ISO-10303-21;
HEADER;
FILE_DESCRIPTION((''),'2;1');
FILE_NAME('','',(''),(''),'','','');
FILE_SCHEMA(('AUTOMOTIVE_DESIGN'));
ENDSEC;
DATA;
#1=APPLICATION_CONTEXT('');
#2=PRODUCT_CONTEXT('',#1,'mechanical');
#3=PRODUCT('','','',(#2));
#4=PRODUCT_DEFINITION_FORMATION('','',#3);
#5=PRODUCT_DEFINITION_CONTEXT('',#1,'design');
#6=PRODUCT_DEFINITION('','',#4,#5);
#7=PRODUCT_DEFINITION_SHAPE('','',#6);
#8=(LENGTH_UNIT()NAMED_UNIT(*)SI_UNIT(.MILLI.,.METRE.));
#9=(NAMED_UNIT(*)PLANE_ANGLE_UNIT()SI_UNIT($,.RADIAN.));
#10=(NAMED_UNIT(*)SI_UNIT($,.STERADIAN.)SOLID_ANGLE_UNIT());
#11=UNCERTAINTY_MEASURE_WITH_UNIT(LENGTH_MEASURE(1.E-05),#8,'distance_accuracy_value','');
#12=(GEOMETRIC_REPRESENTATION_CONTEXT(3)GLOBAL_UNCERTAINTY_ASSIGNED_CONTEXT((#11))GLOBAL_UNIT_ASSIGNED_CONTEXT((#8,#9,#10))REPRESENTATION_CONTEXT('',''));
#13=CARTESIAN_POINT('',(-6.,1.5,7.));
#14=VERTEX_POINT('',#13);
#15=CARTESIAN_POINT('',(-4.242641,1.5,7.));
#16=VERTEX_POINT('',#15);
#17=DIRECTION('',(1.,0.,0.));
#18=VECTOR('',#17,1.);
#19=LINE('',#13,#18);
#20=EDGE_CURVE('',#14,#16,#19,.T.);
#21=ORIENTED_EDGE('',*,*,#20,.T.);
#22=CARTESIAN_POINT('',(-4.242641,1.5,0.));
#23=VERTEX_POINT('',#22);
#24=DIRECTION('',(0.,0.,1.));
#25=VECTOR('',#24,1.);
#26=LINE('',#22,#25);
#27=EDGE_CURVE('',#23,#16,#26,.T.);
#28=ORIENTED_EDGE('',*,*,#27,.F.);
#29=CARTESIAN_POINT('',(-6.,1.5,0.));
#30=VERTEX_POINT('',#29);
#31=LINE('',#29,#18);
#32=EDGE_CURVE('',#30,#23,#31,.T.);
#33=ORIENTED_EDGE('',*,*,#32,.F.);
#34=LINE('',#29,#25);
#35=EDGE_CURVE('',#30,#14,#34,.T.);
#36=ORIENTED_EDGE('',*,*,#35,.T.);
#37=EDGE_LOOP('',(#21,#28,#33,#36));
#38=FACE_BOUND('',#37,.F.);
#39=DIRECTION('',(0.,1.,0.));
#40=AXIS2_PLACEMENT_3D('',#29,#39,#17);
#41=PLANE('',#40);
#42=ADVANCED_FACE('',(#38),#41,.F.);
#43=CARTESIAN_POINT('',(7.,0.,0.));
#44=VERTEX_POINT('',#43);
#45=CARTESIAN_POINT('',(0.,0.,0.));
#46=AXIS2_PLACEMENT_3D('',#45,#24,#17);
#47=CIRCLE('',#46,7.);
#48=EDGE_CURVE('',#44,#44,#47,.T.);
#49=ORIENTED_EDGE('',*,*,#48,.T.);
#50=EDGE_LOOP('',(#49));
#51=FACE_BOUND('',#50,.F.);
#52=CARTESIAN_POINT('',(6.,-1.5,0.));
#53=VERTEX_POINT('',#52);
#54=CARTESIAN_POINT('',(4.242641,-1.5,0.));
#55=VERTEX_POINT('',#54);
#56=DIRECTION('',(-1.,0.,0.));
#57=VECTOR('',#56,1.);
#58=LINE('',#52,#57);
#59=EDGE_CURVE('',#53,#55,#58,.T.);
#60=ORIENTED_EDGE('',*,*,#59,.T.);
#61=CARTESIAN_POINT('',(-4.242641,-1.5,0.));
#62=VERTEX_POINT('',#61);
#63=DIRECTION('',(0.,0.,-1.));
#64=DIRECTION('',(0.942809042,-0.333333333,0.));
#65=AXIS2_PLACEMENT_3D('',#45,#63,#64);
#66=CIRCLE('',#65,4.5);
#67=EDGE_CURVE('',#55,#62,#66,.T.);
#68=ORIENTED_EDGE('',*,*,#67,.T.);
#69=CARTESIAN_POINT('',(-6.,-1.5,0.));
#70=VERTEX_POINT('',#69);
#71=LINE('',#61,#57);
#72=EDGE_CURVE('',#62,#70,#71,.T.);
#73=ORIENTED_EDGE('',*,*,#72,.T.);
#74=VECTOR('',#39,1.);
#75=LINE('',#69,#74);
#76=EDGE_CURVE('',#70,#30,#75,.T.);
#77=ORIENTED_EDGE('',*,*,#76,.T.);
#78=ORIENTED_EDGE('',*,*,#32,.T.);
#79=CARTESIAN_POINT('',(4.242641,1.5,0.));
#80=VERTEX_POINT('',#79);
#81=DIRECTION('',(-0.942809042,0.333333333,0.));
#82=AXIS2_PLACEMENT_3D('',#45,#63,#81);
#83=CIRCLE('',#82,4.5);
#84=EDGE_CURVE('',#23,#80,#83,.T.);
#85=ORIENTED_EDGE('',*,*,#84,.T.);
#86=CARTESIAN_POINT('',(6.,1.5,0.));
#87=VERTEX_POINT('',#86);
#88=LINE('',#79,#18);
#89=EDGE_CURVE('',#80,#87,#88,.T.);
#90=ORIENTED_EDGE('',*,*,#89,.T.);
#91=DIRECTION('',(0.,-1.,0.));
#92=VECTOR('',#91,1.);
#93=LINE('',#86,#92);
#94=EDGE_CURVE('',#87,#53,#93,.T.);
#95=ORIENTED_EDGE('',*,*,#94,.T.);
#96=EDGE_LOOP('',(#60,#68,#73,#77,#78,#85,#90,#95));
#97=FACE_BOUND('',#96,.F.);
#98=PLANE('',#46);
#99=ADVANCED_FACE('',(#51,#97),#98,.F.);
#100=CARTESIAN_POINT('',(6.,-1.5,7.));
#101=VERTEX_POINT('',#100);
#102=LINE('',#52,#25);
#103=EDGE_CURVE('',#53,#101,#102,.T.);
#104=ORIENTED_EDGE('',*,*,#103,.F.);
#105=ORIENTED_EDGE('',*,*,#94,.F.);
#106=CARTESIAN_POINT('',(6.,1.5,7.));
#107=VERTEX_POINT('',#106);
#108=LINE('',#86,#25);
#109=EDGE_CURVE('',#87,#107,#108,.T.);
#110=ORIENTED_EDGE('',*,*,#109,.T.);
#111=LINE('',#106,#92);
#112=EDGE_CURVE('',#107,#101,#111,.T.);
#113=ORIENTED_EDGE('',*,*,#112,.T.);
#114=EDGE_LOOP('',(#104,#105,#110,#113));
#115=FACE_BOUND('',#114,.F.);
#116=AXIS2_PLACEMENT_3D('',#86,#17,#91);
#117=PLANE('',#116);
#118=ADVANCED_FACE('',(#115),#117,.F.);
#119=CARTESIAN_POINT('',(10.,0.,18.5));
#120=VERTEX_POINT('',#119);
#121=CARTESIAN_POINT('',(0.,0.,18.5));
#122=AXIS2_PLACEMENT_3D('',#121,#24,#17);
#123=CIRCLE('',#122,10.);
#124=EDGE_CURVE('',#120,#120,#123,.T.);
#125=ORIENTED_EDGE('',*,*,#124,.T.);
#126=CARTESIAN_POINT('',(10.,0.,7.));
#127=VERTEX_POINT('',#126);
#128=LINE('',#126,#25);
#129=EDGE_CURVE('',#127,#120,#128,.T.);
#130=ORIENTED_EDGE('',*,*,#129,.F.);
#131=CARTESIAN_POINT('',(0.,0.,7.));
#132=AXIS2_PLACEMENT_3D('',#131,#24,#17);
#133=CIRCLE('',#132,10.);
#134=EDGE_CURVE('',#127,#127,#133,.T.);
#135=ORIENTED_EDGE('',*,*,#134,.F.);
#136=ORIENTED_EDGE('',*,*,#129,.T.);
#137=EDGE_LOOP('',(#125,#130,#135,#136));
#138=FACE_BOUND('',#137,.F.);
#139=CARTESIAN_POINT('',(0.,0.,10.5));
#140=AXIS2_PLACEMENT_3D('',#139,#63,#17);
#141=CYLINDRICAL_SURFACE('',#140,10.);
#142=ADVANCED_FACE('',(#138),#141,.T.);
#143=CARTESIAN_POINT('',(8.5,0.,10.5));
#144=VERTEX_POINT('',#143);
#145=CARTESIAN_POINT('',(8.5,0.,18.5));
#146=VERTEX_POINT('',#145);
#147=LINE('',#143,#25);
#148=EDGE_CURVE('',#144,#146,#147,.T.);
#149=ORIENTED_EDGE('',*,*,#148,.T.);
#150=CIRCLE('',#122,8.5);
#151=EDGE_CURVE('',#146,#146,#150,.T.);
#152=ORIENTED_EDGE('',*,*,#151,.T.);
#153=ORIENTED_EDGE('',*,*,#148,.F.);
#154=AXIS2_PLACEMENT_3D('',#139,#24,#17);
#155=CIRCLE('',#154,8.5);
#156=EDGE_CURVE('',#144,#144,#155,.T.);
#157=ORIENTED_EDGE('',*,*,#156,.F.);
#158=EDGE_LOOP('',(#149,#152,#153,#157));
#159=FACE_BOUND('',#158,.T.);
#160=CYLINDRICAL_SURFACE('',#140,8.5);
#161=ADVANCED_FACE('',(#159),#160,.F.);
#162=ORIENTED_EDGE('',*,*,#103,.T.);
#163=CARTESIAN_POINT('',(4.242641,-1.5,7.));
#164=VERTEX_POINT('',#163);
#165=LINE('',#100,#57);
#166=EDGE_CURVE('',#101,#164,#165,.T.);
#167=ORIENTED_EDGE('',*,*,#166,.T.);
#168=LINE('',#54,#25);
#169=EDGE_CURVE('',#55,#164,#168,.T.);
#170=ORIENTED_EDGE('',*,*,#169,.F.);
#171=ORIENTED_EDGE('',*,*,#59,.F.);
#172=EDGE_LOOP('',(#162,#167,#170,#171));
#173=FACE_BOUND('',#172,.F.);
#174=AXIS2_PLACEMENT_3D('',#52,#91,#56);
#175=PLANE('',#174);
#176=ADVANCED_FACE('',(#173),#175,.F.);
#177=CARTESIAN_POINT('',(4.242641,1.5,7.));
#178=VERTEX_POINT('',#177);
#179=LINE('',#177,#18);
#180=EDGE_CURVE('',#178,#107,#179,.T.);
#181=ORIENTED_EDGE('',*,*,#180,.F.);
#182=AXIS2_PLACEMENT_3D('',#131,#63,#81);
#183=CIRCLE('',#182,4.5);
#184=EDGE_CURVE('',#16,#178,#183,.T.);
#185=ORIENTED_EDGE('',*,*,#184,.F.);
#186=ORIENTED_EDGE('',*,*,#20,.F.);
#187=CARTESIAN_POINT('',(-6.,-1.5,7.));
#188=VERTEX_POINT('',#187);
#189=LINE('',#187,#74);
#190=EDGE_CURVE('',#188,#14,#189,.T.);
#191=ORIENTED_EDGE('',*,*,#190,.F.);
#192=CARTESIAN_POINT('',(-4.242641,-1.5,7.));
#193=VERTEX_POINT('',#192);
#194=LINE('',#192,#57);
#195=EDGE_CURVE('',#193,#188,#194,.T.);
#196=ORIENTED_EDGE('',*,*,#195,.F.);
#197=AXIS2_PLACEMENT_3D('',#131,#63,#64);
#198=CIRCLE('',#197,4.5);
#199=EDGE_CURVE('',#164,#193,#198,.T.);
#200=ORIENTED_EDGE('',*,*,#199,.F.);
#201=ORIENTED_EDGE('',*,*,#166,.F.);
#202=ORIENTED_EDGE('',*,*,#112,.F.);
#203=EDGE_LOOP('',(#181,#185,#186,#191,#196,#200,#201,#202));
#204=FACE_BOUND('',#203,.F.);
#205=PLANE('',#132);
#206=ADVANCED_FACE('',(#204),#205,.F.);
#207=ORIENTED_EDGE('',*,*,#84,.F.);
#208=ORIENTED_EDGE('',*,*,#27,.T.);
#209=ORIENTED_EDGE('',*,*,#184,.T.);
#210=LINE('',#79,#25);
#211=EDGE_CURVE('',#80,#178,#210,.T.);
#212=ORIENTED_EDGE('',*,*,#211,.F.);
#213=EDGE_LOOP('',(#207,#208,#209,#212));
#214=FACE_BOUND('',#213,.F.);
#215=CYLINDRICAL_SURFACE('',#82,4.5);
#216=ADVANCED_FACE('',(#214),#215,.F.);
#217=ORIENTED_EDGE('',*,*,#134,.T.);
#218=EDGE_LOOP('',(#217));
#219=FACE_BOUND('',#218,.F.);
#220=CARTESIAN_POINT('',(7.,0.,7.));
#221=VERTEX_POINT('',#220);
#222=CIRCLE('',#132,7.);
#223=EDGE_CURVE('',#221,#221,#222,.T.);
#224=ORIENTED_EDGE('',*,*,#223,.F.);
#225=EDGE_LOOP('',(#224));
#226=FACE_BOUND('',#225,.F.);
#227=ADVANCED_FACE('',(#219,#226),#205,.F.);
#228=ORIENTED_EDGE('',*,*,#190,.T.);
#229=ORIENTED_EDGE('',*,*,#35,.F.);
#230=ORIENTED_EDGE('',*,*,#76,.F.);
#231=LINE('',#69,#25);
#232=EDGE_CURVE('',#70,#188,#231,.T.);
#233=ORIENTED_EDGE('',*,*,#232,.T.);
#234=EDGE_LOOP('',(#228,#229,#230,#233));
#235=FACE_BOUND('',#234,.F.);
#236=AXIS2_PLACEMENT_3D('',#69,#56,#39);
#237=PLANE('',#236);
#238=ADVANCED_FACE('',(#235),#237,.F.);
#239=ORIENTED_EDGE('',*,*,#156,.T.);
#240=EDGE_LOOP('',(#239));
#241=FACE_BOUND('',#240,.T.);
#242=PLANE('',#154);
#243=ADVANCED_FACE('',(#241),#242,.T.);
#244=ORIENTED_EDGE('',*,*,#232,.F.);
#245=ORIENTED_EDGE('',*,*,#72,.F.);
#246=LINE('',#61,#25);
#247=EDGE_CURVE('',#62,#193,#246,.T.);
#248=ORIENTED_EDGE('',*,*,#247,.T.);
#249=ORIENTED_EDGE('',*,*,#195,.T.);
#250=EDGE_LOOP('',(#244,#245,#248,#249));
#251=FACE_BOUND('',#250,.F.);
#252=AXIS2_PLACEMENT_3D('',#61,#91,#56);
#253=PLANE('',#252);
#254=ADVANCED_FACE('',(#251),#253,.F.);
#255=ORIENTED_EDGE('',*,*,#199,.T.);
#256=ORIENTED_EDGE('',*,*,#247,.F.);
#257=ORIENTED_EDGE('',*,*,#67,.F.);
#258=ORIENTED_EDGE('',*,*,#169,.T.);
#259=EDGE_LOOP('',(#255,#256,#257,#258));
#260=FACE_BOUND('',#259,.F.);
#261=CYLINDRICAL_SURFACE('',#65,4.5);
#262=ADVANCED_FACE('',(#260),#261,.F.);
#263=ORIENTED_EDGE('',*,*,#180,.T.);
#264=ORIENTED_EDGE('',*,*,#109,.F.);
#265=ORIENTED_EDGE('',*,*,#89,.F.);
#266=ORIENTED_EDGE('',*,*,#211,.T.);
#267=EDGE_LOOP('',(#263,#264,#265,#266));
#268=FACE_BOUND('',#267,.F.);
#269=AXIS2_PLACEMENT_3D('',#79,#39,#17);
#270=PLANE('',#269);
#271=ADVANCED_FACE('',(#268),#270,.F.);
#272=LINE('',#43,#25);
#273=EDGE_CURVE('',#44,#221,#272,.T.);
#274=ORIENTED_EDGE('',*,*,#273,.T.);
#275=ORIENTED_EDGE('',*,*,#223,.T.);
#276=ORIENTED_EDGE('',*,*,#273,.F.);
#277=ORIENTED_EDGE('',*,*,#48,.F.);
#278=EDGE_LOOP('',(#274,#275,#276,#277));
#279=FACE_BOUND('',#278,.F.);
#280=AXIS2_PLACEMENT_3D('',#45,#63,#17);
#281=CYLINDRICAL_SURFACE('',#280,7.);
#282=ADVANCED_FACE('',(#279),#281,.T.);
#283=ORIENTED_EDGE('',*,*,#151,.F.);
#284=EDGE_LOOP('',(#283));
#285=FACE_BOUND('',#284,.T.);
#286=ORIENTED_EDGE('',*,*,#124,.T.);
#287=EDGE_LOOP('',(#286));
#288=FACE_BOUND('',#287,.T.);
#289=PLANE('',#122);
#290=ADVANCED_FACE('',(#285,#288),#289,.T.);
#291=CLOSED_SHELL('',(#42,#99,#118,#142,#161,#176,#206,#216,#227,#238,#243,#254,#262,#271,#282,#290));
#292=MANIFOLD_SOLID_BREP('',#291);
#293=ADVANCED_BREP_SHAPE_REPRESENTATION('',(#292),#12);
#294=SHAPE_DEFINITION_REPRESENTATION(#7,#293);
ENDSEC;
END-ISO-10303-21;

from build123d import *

# Parameters (mm, degrees)
F0_R     = 7
F1_DEPTH = 7
F2_R     = 10
F2_R_2   = 8.5
F2_R_3   = 7
F3_DEPTH = 3.5
F4_R     = 10
F4_R_2   = 8.5
F5_DEPTH = 8


with BuildPart() as f1:
    # F0 (on Top) → F1 (new body)
    with BuildSketch(Plane.XY):
        Circle(F0_R)
        with BuildLine():
            ThreePointArc((-4.2426406871, 1.5), (0, 4.5), (4.2426406871, 1.5))
            Line((4.2426406871, 1.5), (6, 1.5))
            Line((6, 1.5), (6, 0))
            Line((6, 0), (6, -1.5))
            Line((6, -1.5), (4.2426406871, -1.5))
            ThreePointArc((4.2426406871, -1.5), (0, -4.5), (-4.2426406871, -1.5))
            Line((-4.2426406871, -1.5), (-6, -1.5))
            Line((-6, -1.5), (-6, 0))
            Line((-6, 0), (-6, 1.5))
            Line((-6, 1.5), (-4.2426406871, 1.5))
        make_face(mode=Mode.SUBTRACT)
    extrude(amount=F1_DEPTH)

    # F2 (on face) → F3 (join)
    with BuildSketch(Plane.XY.offset(7)):
        Circle(F2_R)
        Circle(F2_R_2, mode=Mode.SUBTRACT)
        Circle(F2_R_2)
        Circle(F2_R_3, mode=Mode.SUBTRACT)
        Circle(F2_R_3)
        with BuildLine():
            Line((-6, 1.5), (-4.2426406871, 1.5))
            ThreePointArc((-4.2426406871, 1.5), (0, 4.5), (4.2426406871, 1.5))
            Line((4.2426406871, 1.5), (6, 1.5))
            Line((6, 1.5), (6, -1.5))
            Line((6, -1.5), (4.2426406871, -1.5))
            ThreePointArc((4.2426406871, -1.5), (0, -4.5), (-4.2426406871, -1.5))
            Line((-4.2426406871, -1.5), (-6, -1.5))
            Line((-6, -1.5), (-6, 1.5))
        make_face(mode=Mode.SUBTRACT)
        with BuildLine():
            ThreePointArc((4.2426406871, 1.5), (0, 4.5), (-4.2426406871, 1.5))
            Line((-4.2426406871, 1.5), (-6, 1.5))
            Line((-6, 1.5), (-6, -1.5))
            Line((-6, -1.5), (-4.2426406871, -1.5))
            ThreePointArc((-4.2426406871, -1.5), (0, -4.5), (4.2426406871, -1.5))
            Line((4.2426406871, -1.5), (6, -1.5))
            Line((6, -1.5), (6, 1.5))
            Line((6, 1.5), (4.2426406871, 1.5))
        make_face()
    extrude(amount=F3_DEPTH)

    # F4 (on face) → F5 (join)
    with BuildSketch(Plane.XY.offset(10.5)):
        Circle(F4_R)
        Circle(F4_R_2, mode=Mode.SUBTRACT)
    extrude(amount=F5_DEPTH)


solid = f1.part
